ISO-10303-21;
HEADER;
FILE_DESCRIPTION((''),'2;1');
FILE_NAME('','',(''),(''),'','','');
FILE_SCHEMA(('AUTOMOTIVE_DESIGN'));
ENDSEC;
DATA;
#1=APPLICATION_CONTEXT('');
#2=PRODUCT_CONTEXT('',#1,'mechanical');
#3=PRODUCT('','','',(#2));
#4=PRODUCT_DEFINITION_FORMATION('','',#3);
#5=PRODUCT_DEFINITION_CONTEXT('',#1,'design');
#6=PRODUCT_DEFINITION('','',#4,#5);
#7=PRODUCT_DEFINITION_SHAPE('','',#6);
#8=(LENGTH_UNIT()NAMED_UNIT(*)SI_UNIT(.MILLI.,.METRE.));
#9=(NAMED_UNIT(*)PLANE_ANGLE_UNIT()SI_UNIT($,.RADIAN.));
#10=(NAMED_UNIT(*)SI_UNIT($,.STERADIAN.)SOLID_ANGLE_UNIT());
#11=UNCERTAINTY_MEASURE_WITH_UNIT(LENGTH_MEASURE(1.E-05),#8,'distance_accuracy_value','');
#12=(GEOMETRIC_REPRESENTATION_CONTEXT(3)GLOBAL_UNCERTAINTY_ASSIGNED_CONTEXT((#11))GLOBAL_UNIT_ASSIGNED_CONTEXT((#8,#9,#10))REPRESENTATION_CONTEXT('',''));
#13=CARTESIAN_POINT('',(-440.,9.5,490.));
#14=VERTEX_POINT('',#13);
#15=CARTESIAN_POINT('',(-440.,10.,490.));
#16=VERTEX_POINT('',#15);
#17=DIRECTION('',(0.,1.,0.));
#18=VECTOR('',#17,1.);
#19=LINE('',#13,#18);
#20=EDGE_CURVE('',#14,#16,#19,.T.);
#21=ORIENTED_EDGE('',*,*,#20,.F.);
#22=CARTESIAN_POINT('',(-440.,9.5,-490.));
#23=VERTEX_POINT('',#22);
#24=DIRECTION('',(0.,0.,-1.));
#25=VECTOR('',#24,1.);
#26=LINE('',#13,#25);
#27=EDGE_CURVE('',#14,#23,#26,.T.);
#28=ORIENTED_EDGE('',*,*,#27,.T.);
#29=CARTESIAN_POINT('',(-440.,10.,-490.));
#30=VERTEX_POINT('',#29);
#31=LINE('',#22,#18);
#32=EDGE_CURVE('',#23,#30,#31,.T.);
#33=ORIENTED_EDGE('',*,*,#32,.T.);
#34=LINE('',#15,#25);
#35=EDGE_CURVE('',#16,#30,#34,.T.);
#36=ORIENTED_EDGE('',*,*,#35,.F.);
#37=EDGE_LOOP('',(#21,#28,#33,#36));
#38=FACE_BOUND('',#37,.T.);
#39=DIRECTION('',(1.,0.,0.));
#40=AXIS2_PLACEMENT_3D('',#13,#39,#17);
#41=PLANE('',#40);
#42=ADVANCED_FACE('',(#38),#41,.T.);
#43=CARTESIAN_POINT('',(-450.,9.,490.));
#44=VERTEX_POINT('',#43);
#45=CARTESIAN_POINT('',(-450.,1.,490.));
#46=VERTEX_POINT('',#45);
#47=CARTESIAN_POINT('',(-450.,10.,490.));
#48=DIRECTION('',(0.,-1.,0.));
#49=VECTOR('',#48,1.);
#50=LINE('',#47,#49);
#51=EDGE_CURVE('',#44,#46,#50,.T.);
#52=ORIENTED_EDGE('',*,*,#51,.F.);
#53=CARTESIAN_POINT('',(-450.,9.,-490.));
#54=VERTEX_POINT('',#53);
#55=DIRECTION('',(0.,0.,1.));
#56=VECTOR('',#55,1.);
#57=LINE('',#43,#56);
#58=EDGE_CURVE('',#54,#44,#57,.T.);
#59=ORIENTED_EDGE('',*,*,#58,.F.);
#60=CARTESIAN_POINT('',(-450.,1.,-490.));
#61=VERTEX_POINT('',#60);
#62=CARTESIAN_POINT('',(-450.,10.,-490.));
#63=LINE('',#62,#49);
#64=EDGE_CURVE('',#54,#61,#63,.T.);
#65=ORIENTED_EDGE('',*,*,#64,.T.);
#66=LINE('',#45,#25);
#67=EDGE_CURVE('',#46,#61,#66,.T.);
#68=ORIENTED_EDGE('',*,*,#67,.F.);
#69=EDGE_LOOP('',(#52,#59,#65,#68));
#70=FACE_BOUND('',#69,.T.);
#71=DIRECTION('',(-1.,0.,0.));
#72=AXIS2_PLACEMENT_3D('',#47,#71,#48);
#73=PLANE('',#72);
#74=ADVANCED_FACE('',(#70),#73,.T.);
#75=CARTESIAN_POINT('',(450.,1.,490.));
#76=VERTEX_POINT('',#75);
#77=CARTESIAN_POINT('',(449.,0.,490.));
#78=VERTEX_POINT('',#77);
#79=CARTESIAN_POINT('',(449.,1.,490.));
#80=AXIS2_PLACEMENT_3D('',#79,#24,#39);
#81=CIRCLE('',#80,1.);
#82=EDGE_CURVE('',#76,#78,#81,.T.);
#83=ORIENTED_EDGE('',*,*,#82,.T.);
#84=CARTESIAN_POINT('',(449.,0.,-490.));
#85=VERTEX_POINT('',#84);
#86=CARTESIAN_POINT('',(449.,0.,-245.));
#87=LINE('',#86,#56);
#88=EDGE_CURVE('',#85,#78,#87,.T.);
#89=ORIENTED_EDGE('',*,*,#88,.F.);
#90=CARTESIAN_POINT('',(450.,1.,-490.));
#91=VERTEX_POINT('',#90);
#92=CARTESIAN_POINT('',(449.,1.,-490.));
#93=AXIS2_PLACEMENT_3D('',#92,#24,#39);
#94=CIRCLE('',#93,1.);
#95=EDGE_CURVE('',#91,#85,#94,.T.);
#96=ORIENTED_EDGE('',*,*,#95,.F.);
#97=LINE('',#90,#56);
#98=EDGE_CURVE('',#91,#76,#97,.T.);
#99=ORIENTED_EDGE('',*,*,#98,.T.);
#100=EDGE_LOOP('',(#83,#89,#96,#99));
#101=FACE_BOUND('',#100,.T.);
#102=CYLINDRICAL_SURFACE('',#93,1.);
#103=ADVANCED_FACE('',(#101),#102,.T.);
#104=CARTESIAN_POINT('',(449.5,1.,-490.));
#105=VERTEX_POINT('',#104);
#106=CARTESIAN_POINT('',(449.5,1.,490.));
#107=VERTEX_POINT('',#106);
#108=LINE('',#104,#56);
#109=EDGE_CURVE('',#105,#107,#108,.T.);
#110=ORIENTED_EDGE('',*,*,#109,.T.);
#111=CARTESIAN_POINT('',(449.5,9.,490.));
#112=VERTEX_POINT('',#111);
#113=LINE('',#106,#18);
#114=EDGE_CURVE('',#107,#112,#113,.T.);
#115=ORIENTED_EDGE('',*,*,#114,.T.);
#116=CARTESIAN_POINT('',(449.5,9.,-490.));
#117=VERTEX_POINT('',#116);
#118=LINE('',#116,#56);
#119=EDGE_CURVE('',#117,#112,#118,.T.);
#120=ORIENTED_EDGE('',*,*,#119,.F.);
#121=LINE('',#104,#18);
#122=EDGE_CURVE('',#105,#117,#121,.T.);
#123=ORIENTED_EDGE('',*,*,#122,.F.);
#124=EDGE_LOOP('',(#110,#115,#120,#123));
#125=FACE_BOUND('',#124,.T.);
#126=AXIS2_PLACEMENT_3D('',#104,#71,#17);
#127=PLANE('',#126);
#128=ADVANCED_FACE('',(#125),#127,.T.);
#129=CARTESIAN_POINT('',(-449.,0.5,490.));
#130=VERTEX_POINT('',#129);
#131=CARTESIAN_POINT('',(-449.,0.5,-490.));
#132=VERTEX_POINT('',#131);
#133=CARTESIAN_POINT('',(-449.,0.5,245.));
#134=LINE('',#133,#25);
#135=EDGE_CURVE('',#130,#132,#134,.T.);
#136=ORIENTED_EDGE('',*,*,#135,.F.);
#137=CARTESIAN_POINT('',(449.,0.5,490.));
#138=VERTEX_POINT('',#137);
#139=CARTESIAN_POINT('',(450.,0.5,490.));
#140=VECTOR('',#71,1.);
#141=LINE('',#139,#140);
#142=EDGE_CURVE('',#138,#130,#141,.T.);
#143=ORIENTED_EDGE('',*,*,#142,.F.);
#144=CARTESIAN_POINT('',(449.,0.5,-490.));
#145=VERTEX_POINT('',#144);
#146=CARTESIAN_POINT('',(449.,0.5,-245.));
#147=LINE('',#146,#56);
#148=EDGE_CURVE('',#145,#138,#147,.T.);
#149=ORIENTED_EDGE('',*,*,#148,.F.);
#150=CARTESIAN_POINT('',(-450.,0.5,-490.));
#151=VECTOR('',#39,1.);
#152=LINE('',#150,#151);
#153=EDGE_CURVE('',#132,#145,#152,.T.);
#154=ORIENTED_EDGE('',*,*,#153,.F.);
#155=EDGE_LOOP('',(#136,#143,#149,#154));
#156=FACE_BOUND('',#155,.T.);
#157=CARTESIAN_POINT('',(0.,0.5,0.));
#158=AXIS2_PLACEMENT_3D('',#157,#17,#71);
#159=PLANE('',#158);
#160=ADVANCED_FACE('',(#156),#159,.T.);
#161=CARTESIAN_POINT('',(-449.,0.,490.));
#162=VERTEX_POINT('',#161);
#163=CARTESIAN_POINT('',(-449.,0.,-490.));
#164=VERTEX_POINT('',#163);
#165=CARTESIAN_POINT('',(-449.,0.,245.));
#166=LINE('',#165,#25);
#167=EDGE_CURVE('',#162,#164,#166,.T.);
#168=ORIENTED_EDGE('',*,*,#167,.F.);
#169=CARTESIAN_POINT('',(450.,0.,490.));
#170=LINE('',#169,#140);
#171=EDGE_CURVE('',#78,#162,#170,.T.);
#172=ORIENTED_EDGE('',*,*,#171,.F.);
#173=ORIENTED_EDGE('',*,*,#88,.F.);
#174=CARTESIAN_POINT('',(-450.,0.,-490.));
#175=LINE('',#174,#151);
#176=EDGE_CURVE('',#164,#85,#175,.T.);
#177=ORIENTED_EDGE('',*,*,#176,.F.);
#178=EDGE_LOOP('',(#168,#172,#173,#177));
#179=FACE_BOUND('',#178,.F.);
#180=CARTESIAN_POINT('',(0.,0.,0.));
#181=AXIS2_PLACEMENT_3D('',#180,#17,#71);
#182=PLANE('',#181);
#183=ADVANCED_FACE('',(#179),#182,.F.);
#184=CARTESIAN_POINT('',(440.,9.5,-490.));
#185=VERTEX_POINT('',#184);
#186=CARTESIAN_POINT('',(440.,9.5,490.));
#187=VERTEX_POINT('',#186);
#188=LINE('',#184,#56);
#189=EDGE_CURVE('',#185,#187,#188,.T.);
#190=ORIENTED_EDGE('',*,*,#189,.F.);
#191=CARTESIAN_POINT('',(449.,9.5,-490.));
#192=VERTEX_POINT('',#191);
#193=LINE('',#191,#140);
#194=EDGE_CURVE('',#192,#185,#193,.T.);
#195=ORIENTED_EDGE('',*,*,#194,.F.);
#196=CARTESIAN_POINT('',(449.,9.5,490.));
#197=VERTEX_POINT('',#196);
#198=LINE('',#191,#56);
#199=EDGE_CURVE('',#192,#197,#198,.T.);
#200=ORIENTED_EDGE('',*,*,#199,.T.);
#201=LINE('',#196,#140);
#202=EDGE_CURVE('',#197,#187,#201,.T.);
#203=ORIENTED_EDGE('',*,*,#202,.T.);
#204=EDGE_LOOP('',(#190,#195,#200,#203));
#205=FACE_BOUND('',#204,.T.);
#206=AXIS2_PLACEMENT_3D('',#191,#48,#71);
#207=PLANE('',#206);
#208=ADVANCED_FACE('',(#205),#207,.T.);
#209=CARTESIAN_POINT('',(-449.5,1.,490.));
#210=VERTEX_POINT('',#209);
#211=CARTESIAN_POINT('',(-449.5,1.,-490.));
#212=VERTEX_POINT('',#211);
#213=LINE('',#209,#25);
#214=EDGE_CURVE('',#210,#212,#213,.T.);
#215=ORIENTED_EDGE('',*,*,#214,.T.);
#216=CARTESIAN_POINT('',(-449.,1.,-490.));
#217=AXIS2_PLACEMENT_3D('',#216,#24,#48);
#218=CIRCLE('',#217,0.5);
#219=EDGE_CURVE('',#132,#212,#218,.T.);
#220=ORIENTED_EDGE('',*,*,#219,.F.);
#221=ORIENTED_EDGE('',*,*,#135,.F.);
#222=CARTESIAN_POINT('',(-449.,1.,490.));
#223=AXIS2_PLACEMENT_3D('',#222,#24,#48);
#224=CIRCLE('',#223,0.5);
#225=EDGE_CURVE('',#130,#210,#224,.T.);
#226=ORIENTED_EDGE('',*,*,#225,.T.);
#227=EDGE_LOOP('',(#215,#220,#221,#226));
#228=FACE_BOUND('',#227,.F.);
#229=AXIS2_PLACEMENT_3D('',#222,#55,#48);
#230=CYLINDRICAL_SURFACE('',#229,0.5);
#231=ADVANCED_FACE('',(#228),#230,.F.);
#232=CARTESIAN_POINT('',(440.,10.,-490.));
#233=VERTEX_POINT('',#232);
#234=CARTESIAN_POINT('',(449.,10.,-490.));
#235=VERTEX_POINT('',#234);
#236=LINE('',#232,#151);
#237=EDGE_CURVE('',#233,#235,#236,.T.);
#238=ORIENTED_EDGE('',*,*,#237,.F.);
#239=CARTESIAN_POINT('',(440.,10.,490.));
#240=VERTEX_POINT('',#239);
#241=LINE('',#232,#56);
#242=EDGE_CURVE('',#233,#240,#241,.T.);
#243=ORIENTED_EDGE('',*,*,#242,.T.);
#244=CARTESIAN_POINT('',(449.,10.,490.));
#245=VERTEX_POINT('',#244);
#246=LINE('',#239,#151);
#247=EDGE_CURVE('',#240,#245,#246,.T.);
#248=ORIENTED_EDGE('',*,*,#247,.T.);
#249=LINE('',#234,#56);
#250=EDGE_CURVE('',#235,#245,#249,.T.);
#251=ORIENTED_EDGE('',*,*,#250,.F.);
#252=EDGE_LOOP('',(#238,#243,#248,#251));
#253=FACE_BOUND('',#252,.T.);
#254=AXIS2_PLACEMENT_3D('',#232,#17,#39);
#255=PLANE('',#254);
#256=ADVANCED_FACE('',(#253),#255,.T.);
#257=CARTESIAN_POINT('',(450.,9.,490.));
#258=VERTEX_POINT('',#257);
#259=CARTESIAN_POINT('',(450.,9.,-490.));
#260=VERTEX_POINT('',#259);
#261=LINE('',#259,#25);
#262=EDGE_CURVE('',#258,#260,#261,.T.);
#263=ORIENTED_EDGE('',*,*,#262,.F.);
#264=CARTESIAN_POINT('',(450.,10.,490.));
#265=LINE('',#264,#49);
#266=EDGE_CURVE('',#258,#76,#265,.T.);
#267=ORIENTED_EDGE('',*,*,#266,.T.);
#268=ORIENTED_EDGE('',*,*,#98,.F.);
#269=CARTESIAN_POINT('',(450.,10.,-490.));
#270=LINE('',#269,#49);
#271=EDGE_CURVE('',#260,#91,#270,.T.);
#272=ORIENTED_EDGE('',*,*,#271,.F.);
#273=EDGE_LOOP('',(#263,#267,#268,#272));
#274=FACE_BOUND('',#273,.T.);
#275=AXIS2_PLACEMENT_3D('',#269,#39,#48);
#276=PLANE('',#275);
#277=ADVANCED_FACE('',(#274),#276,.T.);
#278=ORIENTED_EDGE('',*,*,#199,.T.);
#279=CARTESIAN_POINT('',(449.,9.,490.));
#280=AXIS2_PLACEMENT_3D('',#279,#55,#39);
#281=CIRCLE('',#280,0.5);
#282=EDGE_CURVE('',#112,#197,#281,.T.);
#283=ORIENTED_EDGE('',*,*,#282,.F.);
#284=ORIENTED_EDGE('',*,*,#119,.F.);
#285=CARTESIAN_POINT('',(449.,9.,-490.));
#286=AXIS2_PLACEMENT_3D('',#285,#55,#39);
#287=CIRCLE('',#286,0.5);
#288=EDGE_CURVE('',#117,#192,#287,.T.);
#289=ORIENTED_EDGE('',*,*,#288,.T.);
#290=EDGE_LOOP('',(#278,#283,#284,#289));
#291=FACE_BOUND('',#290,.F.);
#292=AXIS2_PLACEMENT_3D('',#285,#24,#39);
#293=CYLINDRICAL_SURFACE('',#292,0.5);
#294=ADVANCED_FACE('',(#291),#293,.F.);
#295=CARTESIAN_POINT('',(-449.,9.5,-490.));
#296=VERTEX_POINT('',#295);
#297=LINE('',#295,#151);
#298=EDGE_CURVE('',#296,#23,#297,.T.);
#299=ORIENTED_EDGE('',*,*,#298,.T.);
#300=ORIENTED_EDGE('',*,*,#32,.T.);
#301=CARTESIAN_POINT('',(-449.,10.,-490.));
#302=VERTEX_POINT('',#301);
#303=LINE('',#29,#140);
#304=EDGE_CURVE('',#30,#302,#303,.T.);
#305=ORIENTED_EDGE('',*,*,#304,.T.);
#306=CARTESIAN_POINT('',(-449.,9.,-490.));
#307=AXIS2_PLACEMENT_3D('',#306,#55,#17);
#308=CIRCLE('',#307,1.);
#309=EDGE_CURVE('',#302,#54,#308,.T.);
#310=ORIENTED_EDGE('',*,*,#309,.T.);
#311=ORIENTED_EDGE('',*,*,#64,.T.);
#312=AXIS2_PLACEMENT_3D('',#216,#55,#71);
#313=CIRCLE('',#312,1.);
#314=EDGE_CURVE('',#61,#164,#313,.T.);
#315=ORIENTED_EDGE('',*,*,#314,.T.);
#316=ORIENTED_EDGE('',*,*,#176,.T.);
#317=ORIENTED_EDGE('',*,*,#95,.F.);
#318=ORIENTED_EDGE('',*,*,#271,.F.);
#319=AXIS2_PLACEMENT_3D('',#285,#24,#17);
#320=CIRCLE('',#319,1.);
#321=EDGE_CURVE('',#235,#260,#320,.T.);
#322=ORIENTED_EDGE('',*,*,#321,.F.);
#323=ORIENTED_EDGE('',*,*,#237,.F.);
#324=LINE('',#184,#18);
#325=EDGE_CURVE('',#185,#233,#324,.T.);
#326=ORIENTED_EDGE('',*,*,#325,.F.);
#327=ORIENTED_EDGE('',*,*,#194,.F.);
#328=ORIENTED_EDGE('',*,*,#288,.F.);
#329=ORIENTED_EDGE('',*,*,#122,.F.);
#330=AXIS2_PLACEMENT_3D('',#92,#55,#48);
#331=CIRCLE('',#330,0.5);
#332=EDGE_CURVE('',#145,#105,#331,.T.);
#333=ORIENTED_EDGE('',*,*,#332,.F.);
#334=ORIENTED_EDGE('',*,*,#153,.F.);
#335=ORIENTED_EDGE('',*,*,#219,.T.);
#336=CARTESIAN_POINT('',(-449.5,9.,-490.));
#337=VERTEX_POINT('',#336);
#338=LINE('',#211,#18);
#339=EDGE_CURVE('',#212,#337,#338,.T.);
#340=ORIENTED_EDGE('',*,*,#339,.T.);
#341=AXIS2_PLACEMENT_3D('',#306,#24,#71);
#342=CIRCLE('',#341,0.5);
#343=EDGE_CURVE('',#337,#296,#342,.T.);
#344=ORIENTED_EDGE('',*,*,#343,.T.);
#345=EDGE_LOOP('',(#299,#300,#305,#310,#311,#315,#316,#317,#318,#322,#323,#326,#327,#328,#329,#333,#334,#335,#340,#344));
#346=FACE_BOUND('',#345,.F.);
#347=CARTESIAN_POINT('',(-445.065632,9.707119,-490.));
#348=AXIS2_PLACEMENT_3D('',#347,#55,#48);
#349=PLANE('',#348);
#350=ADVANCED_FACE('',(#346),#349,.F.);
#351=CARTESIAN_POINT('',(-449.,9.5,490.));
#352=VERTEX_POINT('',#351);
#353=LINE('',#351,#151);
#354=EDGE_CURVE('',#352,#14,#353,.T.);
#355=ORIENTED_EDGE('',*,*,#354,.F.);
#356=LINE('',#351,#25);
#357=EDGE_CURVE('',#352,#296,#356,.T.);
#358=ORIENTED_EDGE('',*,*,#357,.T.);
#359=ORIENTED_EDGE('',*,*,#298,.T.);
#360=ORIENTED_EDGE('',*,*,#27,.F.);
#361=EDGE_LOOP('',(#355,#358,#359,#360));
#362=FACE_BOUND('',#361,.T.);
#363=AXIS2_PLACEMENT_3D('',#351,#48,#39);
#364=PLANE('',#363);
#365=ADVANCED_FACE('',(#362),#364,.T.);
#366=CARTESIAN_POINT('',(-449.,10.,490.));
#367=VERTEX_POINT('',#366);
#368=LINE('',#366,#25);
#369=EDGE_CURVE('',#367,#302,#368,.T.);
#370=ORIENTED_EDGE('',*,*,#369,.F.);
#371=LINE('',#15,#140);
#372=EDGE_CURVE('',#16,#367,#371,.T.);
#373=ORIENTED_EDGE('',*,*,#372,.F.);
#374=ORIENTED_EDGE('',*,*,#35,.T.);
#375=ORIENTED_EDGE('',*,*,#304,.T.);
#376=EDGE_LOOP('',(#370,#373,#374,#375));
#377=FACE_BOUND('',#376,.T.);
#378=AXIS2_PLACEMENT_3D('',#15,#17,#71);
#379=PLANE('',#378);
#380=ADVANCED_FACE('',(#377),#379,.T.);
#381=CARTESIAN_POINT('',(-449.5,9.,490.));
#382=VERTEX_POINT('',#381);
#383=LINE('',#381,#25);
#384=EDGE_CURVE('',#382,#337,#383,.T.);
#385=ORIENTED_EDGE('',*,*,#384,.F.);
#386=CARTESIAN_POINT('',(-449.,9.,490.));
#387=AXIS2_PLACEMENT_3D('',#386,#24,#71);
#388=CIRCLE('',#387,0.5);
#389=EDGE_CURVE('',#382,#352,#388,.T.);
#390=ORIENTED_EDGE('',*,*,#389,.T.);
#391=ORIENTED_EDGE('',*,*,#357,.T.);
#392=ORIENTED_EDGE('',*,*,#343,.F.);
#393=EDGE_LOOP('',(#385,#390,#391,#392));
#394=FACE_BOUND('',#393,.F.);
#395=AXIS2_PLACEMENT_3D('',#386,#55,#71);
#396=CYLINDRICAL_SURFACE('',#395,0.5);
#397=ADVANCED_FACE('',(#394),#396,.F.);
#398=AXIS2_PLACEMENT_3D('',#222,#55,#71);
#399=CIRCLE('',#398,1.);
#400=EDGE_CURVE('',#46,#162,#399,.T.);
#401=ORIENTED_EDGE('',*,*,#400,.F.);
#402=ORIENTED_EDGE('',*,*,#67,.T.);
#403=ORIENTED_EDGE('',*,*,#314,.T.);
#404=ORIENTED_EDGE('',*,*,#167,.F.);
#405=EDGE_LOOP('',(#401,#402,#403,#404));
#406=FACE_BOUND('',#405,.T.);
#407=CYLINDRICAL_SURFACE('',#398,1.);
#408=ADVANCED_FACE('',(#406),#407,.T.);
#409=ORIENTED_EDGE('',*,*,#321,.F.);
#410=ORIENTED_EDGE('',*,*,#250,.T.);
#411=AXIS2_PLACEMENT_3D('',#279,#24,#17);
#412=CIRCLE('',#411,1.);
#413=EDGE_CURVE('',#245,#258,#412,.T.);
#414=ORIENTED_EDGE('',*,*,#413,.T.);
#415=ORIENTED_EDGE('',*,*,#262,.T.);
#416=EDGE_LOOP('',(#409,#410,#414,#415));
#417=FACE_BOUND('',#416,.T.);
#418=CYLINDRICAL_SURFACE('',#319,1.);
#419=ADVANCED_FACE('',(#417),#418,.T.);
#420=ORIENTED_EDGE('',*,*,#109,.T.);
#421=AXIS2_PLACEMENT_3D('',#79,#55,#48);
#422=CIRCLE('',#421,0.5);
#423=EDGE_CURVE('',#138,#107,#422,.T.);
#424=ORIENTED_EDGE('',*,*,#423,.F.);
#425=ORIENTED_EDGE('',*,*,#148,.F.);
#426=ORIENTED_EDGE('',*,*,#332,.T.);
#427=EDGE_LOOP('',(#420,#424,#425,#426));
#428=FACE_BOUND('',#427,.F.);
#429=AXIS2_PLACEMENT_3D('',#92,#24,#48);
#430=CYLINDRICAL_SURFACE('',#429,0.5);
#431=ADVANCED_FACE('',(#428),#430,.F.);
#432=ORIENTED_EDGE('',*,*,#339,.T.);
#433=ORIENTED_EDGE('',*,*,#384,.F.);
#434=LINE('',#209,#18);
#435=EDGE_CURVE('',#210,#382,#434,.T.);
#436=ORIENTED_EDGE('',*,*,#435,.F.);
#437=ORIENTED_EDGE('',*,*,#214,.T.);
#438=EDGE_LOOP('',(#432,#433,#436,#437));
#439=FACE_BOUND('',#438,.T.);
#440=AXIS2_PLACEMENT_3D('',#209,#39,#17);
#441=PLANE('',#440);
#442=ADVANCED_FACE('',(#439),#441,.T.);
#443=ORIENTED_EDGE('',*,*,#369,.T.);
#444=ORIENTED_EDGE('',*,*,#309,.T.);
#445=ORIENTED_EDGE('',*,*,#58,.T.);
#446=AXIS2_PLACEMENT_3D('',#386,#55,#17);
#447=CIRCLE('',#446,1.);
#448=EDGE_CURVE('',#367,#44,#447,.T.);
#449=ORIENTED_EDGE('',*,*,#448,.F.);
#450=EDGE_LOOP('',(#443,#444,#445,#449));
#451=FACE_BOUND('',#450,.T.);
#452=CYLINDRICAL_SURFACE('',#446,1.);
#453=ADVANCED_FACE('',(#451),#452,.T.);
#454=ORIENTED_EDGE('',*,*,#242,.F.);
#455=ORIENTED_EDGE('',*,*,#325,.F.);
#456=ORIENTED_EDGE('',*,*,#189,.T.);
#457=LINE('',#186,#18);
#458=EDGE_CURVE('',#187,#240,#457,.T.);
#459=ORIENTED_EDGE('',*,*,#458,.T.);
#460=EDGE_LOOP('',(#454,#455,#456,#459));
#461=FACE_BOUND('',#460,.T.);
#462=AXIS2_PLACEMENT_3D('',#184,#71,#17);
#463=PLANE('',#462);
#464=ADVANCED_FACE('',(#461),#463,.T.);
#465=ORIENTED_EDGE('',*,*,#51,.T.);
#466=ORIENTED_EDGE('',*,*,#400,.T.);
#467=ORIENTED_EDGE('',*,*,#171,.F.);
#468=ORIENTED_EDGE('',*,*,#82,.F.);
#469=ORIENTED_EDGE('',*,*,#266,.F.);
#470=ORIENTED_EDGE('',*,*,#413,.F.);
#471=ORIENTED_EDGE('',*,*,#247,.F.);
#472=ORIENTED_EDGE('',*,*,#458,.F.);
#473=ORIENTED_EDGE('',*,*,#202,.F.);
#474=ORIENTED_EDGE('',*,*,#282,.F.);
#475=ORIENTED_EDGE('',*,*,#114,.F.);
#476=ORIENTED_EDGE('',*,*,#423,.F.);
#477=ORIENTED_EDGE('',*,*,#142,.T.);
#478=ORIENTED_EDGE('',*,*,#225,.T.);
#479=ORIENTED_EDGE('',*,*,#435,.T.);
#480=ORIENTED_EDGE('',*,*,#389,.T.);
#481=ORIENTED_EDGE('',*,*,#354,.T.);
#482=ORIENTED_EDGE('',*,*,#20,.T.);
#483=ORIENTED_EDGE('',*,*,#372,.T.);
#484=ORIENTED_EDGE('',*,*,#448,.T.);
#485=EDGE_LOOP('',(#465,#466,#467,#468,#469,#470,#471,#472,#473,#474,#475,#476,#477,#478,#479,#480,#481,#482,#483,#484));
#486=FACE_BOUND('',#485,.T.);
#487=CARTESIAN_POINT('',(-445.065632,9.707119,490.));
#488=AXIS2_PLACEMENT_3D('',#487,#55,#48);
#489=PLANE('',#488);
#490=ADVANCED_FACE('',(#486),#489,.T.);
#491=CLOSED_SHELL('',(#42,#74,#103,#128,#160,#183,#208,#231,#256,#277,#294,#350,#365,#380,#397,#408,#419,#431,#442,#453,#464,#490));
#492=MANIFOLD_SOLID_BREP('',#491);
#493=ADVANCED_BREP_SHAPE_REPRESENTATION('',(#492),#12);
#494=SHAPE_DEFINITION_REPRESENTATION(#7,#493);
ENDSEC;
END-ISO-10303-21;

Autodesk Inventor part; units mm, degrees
ref_plane "YZ Plane" through (0, 0, 0) normal (1, 0, 0) x (0, 1, 0)
ref_plane "XZ Plane" through (0, 0, 0) normal (0, 1, 0) x (-1, 0, 0)
ref_plane "XY Plane" through (0, 0, 0) normal (0, 0, 1) x (1, 0, 0)
sketch "Sketch6" plane through (0, 0, 0) normal (0, 1, 0) x (-1, 0, 0)
  line L0 (450, -490) -> (-450, -490)
  line L1 (-450, -490) -> (-450, 490)
  line L2 (-450, 490) -> (450, 490)
  line L3 (450, 490) -> (450, -490)
  line L4 (450, -490) -> (-450, 490) construction
  line L5 (-450, -490) -> (450, 490) construction
  point P0 (0, 0)
  dimension "d52" = 900
  dimension "d53" = 980
extrude "Plate2" add sketch "Sketch6" along normal blind 0.5
sketch "Sketch11" plane through (449.5, 0, -490) normal (1, 0, 0) x (0, 1, 0)
  line L0 (0, 980) -> (0, 0)
  line L1 (0, 0) -> (10, 0)
  line L2 (10, 0) -> (10, 980)
  line L3 (10, 980) -> (0, 980)
edge flange "Flange2" height 10 angle 90 thickness 0.5 bend radius 0.5 thickness toward (1, 0, 0) relief tear relief width 0.5 relief depth 0.25 edges at (450, 0.5, 0) wall of the first edge with corners at (449.5, 0, 490) (449.5, 0, -490) (449.5, 10, -490) (449.5, 10, 490)
bend "Bend3"
corner "Corner3"
sketch "Sketch12" plane through (450, 9.5, -490) normal (0, 1, 0) x (-1, 0, 0)
  line L0 (0, 980) -> (0, 0)
  line L1 (0, 0) -> (10, 0)
  line L2 (10, 0) -> (10, 980)
  line L3 (10, 980) -> (0, 980)
edge flange "Flange3" height 10 angle 90 thickness 0.5 bend radius 0.5 thickness toward (0, 1, 0) relief tear relief width 0.5 relief depth 0.25 edges at (449.5, 10, 0) wall of the first edge with corners at (450, 9.5, 490) (450, 9.5, -490) (440, 9.5, -490) (440, 9.5, 490)
bend "Bend4"
corner "Corner4"
sketch "Sketch13" plane through (-449.5, 0, 490) normal (-1, 0, 0) x (0, -1, 0)
  line L0 (0, -980) -> (0, 0)
  line L1 (0, 0) -> (-10, 0)
  line L2 (-10, 0) -> (-10, -980)
  line L3 (-10, -980) -> (0, -980)
edge flange "Flange4" height 10 angle 90 thickness 0.5 bend radius 0.5 thickness toward (-1, 0, 0) relief tear relief width 0.5 relief depth 0.25 edges at (-450, 0.5, 0) wall of the first edge with corners at (-449.5, 0, -490) (-449.5, 0, 490) (-449.5, 10, 490) (-449.5, 10, -490)
bend "Bend5"
corner "Corner5"
sketch "Sketch14" plane through (-450, 9.5, 490) normal (0, 1, 0) x (-1, 0, 0)
  line L0 (0, -980) -> (0, 0)
  line L1 (0, 0) -> (-10, 0)
  line L2 (-10, 0) -> (-10, -980)
  line L3 (-10, -980) -> (0, -980)
edge flange "Flange5" height 10 angle 90 thickness 0.5 bend radius 0.5 thickness toward (0, 1, 0) relief tear relief width 0.5 relief depth 0.25 edges at (-449.5, 10, 0) wall of the first edge with corners at (-450, 9.5, -490) (-450, 9.5, 490) (-440, 9.5, 490) (-440, 9.5, -490)
bend "Bend6"
corner "Corner6"
equation "\"d52\" = ЖАБРЫ_базовая_ширина - ЖАБРЫ_коррекция"
equation "\"d53\" = ЖАБРЫ_базовая_длина_кор_лист"
equation "\"d54\" = Thickness"
equation "\"d84\" = BendReliefWidth"
equation "\"d85\" = BendReliefDepth"
equation "\"d86\" = MinimumRemnant"
equation "\"d87\" = TransitionRadius"
equation "\"d90\" = BendRadius"
equation "\"d91\" = CornerReliefSize"
equation "\"d92\" = GapSize"
equation "\"d93\" = JacobiRadiusSize"
equation "\"d94\" = BendReliefWidth"
equation "\"d95\" = BendReliefDepth"
equation "\"d96\" = MinimumRemnant"
equation "\"d97\" = TransitionRadius"
equation "\"d100\" = BendRadius"
equation "\"d101\" = CornerReliefSize"
equation "\"d102\" = GapSize"
equation "\"d103\" = JacobiRadiusSize"
equation "\"d104\" = BendReliefWidth"
equation "\"d105\" = BendReliefDepth"
equation "\"d106\" = MinimumRemnant"
equation "\"d107\" = TransitionRadius"
equation "\"d110\" = BendRadius"
equation "\"d111\" = CornerReliefSize"
equation "\"d112\" = GapSize"
equation "\"d113\" = JacobiRadiusSize"
equation "\"d114\" = BendReliefWidth"
equation "\"d115\" = BendReliefDepth"
equation "\"d116\" = MinimumRemnant"
equation "\"d117\" = TransitionRadius"
equation "\"d120\" = BendRadius"
equation "\"d121\" = CornerReliefSize"
equation "\"d122\" = GapSize"
equation "\"d123\" = JacobiRadiusSize"
equation "\"BendRadius\" = Thickness"
equation "\"BendReliefWidth\" = Thickness"
equation "\"BendReliefDepth\" = 0.5 * Thickness"
equation "\"CornerReliefSize\" = 4 * Thickness"
equation "\"MinimumRemnant\" = 2 * Thickness"
equation "\"TransitionRadius\" = BendRadius"
equation "\"JacobiRadiusSize\" = BendRadius"
equation "\"GapSize\" = Thickness"
equation "\"ЖАБРЫ_базовая_ширина\" = 925"
equation "\"ЖАБРЫ_коррекция\" = 25"
equation "\"ЖАБРЫ_базовая_длина_кор_лист\" = 980"
equation "\"Thickness\" = 0.5"
properties part number "MSC 803 sheet gills" material "Stainless Steel"
